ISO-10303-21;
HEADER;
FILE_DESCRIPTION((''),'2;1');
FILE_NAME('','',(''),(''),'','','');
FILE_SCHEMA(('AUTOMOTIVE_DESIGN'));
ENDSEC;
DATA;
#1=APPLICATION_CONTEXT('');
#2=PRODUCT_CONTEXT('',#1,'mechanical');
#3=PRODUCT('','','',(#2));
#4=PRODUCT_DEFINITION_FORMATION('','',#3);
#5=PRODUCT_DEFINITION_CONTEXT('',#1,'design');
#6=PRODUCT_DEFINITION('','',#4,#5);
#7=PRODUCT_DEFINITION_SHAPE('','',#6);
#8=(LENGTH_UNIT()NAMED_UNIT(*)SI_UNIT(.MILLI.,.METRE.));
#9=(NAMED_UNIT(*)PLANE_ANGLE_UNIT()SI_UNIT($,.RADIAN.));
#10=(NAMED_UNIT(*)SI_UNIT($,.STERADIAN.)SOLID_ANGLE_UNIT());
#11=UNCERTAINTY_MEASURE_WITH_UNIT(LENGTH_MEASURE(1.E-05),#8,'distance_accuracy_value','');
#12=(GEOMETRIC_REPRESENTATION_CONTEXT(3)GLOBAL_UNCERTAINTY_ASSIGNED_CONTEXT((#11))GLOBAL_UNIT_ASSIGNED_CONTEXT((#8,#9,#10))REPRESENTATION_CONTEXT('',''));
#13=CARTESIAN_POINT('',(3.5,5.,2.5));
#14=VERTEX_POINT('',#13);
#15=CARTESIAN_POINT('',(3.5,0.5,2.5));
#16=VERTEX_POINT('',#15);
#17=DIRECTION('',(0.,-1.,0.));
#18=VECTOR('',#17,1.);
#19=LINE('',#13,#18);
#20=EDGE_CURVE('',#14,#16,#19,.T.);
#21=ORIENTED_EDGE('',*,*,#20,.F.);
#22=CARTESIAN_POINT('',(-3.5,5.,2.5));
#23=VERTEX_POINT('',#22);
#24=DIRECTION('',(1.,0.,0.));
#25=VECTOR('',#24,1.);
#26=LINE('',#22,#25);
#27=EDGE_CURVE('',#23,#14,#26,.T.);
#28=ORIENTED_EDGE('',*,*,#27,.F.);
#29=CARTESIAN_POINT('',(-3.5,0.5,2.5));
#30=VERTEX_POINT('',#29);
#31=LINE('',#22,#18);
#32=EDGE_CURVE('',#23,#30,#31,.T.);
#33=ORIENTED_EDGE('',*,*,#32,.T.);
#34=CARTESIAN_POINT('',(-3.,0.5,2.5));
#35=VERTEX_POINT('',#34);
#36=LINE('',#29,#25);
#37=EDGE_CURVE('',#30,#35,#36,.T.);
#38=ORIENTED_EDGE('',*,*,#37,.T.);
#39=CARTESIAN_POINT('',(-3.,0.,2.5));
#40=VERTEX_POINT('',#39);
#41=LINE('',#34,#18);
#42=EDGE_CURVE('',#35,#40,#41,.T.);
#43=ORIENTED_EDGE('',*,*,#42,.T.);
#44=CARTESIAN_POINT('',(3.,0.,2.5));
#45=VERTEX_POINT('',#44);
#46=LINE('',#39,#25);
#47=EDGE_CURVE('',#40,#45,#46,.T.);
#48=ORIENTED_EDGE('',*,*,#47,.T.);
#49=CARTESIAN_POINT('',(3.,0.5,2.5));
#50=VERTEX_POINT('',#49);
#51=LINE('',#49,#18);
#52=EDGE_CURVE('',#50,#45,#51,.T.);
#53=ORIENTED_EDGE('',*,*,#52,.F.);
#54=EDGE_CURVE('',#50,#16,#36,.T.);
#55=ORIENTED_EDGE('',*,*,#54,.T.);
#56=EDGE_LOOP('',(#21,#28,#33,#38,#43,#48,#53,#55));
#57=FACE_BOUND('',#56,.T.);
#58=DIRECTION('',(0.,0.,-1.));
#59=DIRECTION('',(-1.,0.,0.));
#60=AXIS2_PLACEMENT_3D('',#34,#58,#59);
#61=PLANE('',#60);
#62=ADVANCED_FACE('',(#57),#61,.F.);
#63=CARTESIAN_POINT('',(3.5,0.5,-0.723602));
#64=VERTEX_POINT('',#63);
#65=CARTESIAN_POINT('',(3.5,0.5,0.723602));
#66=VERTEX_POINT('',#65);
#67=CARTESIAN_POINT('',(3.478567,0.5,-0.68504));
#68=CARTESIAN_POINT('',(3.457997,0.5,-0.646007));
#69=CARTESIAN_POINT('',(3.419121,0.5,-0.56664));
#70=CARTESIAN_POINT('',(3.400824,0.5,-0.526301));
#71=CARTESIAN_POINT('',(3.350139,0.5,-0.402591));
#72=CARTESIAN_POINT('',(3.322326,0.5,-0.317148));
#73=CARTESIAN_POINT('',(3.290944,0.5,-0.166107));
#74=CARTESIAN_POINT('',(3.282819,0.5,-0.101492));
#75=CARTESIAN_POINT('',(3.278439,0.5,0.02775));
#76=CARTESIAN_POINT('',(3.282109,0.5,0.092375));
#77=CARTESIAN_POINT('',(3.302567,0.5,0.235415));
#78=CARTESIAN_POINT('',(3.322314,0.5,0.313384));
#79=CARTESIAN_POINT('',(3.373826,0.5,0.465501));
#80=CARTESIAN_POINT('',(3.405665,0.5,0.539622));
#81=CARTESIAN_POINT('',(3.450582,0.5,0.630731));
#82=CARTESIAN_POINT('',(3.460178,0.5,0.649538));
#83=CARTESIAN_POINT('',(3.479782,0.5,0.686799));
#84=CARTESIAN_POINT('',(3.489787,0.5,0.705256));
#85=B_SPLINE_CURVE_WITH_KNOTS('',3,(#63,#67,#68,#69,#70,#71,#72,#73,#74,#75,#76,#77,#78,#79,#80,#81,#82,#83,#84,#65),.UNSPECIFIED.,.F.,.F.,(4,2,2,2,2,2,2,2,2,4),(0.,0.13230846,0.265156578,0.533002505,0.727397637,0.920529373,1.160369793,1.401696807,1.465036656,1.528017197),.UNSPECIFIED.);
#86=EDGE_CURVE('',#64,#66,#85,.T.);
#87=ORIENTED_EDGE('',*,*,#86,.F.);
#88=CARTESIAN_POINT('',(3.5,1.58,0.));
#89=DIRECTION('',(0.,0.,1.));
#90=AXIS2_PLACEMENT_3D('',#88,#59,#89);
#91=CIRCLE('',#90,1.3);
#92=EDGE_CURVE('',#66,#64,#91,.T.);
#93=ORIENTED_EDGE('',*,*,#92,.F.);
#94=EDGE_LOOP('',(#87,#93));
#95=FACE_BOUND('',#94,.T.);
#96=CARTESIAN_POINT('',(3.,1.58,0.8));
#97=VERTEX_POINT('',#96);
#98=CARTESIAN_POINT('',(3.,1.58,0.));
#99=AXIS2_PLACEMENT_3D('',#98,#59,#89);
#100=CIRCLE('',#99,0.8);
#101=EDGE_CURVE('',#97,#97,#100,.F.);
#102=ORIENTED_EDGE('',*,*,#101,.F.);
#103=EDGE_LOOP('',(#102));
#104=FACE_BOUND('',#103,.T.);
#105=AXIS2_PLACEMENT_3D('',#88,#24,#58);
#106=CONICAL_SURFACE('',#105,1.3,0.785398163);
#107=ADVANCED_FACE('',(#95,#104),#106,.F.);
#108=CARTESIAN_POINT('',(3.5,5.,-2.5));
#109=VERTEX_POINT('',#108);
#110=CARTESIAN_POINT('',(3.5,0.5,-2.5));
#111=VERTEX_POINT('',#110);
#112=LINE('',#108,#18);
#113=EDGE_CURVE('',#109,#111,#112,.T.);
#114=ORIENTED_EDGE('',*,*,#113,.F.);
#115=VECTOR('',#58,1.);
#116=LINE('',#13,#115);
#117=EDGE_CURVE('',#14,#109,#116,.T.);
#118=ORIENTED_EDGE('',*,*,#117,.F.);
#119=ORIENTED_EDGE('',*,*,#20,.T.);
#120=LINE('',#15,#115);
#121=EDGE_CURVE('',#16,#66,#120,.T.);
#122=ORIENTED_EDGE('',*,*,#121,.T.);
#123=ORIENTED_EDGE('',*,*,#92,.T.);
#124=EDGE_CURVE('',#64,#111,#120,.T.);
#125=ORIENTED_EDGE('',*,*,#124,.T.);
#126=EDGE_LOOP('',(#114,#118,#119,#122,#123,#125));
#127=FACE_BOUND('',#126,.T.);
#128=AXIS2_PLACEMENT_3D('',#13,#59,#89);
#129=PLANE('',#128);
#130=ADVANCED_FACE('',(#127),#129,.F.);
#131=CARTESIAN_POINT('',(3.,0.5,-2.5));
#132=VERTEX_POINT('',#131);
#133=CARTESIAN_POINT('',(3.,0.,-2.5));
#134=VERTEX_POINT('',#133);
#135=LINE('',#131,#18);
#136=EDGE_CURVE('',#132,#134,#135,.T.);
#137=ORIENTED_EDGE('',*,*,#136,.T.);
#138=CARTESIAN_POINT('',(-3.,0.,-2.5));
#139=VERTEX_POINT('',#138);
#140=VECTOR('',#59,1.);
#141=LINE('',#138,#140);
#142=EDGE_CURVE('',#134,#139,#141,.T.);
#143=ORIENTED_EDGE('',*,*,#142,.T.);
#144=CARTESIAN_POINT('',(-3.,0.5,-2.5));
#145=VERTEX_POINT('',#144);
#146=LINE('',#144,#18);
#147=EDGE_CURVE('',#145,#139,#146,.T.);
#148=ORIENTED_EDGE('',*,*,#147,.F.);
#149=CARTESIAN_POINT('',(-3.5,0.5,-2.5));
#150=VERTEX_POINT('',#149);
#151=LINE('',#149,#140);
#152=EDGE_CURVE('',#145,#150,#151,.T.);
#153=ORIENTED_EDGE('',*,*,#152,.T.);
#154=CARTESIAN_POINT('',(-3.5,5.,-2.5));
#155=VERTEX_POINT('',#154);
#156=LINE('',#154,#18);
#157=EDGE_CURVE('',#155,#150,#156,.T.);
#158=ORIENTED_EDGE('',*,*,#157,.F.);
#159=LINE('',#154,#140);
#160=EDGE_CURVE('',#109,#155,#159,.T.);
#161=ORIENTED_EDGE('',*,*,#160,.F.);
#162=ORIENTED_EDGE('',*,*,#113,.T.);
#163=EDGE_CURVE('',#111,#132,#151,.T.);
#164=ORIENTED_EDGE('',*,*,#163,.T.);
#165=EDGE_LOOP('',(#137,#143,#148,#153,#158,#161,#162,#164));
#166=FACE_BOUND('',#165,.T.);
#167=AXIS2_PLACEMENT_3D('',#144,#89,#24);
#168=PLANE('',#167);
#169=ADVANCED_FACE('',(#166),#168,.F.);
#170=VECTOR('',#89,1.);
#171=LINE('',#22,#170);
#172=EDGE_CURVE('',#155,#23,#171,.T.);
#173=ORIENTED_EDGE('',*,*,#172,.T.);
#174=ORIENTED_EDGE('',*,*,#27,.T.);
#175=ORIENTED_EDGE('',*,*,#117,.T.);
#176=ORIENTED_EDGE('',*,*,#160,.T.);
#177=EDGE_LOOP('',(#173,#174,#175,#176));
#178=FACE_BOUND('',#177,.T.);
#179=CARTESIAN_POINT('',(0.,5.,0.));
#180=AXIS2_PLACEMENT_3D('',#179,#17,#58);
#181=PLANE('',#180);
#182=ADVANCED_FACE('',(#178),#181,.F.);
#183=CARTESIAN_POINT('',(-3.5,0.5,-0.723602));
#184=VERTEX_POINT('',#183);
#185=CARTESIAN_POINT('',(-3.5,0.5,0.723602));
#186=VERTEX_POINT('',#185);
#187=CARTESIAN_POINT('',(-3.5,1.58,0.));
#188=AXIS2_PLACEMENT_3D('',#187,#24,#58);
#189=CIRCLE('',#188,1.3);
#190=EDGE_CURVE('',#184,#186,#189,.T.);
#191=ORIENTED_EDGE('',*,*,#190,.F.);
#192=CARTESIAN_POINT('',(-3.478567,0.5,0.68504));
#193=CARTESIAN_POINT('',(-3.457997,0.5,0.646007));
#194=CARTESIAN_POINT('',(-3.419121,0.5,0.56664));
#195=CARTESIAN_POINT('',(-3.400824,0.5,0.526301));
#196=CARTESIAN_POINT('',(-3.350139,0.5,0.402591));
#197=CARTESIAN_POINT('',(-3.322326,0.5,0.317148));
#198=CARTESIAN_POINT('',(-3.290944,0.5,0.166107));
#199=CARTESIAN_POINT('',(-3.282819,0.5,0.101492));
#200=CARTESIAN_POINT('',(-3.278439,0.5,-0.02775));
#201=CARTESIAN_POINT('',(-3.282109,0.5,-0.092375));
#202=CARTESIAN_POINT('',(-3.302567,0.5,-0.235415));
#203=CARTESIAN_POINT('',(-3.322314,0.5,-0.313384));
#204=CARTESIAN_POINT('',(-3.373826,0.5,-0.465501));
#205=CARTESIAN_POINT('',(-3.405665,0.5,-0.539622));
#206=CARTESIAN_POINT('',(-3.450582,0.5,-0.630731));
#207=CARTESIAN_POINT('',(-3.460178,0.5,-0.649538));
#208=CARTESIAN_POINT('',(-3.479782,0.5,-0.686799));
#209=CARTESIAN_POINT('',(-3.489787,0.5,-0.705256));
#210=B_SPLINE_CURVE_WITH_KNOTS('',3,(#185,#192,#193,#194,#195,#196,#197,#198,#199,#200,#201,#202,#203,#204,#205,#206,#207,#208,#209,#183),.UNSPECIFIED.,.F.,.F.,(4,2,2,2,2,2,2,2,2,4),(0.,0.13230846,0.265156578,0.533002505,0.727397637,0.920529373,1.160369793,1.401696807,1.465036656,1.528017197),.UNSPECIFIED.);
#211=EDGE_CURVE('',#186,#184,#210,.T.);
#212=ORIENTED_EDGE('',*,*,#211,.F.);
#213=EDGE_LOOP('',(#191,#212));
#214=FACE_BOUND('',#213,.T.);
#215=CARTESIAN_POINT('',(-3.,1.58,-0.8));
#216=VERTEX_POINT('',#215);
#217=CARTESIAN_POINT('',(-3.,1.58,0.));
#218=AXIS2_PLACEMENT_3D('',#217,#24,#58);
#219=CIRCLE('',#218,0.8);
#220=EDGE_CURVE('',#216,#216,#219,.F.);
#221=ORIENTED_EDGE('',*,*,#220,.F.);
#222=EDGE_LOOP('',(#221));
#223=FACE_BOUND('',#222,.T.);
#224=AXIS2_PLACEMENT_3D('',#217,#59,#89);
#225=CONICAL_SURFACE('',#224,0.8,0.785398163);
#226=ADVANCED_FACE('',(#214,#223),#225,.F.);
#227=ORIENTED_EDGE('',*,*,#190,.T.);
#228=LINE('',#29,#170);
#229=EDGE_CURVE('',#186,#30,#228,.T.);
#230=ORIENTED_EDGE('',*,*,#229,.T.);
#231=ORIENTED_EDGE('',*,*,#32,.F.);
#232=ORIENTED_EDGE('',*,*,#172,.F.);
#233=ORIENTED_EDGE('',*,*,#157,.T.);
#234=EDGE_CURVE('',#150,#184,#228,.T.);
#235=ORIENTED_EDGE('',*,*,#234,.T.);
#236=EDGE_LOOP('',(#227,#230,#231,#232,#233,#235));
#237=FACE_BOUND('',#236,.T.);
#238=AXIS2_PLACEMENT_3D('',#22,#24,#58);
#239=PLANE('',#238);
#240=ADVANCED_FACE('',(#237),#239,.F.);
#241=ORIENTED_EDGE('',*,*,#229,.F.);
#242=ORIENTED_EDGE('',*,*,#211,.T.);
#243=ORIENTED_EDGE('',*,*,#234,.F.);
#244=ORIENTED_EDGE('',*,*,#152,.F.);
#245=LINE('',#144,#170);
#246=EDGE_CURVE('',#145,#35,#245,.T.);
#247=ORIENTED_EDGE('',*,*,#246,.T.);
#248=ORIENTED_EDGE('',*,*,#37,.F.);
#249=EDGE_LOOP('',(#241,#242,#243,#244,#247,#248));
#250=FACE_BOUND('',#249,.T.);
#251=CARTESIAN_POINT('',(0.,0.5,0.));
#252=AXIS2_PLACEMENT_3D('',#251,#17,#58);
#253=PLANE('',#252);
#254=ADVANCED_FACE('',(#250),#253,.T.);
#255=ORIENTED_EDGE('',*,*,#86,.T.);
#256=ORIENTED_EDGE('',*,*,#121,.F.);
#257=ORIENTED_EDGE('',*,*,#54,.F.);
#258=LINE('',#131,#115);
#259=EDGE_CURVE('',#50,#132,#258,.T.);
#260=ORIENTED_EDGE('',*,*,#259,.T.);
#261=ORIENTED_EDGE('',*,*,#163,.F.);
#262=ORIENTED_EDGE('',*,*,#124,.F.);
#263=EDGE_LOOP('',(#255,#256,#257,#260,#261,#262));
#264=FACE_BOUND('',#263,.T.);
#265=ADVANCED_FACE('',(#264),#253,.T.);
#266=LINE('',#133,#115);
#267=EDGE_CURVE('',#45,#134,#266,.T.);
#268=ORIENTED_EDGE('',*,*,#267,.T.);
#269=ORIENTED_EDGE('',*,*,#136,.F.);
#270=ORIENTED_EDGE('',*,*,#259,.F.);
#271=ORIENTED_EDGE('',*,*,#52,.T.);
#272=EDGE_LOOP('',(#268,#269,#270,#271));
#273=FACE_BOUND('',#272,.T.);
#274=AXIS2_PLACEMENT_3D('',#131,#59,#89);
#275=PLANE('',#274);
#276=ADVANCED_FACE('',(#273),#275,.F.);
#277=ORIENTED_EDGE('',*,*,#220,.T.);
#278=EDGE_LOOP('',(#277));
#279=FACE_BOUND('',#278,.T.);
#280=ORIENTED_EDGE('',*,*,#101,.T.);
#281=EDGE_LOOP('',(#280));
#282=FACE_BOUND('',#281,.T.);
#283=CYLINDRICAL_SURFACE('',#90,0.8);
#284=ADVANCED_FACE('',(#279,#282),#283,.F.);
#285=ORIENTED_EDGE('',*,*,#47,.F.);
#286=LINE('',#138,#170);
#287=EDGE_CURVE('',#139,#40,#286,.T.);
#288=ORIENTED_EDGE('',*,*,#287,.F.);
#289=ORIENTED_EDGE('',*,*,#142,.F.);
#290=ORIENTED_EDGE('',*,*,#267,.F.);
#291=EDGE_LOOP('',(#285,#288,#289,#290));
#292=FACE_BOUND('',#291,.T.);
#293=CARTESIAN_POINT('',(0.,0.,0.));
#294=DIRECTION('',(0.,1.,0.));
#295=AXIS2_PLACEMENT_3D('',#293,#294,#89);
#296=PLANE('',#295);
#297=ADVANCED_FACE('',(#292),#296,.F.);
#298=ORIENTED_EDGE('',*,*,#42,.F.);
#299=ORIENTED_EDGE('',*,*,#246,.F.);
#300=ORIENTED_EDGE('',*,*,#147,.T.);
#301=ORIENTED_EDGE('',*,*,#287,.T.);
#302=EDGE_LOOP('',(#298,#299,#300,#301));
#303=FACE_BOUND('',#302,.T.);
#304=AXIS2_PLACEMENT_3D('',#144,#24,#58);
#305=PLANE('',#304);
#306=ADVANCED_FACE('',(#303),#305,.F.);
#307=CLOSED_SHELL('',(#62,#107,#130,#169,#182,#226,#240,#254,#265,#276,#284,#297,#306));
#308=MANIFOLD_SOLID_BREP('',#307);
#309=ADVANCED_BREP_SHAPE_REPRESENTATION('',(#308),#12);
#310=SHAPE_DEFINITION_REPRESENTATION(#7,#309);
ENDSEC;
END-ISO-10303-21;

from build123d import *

# Parameters (mm, degrees)
SKETCH1_W           = 6
SKETCH1_H           = 5
BOSS_EXTRUDE1_DEPTH = 0.5
SKETCH2_W           = 7
SKETCH2_H           = 5
BOSS_EXTRUDE2_DEPTH = 4.5
SKETCH3_R           = 0.8
CUT_EXTRUDE1_DEPTH  = 9.958236434
CHAMFER1_SIZE       = 0.5


with BuildPart() as part:
    # Sketch1 → Boss-Extrude1 (new body)
    with BuildSketch(Plane(origin=(0, 0, 0), x_dir=(1, 0, 0), z_dir=(0, 1, 0))):
        Rectangle(SKETCH1_W, SKETCH1_H)
    extrude(amount=BOSS_EXTRUDE1_DEPTH)

    # Sketch2 → Boss-Extrude2 (add)
    with BuildSketch(Plane(origin=(0, 0.5, 0), x_dir=(1, 0, 0), z_dir=(0, 1, 0))):
        Rectangle(SKETCH2_W, SKETCH2_H)
    extrude(amount=BOSS_EXTRUDE2_DEPTH)

    # Sketch3 → Cut-Extrude1 (cut, through all)
    with BuildSketch(Plane.ZY.offset(3.5)):
        with Locations((0, 1.58)):
            Circle(SKETCH3_R)
    extrude(amount=-CUT_EXTRUDE1_DEPTH, mode=Mode.SUBTRACT)

    # Chamfer1
    # the kernel refuses this chamfer: 0.5 mm, written as the material it takes off along each edge
    with BuildSketch(Plane(origin=(3.5, 1.58, 0), x_dir=(0, 0, 1), z_dir=(0, -1, 0))) as chamfer1_piece_1:
        Polygon((0.8 + CHAMFER1_SIZE, 0), (0.8, CHAMFER1_SIZE), (0.8, 0), align=None)
    revolve(axis=Axis((3.5, 1.58, 0), (-1, 0, 0)), mode=Mode.SUBTRACT)
    with BuildSketch(Plane(origin=(-3.5, 1.58, 0), x_dir=(0, 0, 1), z_dir=(0, -1, 0))) as chamfer1_piece_2:
        Polygon((0.8 + CHAMFER1_SIZE, 0), (0.8, -CHAMFER1_SIZE), (0.8, 0), align=None)
    revolve(axis=Axis((-3.5, 1.58, 0), (-1, 0, 0)), mode=Mode.SUBTRACT)


solid = part.part
